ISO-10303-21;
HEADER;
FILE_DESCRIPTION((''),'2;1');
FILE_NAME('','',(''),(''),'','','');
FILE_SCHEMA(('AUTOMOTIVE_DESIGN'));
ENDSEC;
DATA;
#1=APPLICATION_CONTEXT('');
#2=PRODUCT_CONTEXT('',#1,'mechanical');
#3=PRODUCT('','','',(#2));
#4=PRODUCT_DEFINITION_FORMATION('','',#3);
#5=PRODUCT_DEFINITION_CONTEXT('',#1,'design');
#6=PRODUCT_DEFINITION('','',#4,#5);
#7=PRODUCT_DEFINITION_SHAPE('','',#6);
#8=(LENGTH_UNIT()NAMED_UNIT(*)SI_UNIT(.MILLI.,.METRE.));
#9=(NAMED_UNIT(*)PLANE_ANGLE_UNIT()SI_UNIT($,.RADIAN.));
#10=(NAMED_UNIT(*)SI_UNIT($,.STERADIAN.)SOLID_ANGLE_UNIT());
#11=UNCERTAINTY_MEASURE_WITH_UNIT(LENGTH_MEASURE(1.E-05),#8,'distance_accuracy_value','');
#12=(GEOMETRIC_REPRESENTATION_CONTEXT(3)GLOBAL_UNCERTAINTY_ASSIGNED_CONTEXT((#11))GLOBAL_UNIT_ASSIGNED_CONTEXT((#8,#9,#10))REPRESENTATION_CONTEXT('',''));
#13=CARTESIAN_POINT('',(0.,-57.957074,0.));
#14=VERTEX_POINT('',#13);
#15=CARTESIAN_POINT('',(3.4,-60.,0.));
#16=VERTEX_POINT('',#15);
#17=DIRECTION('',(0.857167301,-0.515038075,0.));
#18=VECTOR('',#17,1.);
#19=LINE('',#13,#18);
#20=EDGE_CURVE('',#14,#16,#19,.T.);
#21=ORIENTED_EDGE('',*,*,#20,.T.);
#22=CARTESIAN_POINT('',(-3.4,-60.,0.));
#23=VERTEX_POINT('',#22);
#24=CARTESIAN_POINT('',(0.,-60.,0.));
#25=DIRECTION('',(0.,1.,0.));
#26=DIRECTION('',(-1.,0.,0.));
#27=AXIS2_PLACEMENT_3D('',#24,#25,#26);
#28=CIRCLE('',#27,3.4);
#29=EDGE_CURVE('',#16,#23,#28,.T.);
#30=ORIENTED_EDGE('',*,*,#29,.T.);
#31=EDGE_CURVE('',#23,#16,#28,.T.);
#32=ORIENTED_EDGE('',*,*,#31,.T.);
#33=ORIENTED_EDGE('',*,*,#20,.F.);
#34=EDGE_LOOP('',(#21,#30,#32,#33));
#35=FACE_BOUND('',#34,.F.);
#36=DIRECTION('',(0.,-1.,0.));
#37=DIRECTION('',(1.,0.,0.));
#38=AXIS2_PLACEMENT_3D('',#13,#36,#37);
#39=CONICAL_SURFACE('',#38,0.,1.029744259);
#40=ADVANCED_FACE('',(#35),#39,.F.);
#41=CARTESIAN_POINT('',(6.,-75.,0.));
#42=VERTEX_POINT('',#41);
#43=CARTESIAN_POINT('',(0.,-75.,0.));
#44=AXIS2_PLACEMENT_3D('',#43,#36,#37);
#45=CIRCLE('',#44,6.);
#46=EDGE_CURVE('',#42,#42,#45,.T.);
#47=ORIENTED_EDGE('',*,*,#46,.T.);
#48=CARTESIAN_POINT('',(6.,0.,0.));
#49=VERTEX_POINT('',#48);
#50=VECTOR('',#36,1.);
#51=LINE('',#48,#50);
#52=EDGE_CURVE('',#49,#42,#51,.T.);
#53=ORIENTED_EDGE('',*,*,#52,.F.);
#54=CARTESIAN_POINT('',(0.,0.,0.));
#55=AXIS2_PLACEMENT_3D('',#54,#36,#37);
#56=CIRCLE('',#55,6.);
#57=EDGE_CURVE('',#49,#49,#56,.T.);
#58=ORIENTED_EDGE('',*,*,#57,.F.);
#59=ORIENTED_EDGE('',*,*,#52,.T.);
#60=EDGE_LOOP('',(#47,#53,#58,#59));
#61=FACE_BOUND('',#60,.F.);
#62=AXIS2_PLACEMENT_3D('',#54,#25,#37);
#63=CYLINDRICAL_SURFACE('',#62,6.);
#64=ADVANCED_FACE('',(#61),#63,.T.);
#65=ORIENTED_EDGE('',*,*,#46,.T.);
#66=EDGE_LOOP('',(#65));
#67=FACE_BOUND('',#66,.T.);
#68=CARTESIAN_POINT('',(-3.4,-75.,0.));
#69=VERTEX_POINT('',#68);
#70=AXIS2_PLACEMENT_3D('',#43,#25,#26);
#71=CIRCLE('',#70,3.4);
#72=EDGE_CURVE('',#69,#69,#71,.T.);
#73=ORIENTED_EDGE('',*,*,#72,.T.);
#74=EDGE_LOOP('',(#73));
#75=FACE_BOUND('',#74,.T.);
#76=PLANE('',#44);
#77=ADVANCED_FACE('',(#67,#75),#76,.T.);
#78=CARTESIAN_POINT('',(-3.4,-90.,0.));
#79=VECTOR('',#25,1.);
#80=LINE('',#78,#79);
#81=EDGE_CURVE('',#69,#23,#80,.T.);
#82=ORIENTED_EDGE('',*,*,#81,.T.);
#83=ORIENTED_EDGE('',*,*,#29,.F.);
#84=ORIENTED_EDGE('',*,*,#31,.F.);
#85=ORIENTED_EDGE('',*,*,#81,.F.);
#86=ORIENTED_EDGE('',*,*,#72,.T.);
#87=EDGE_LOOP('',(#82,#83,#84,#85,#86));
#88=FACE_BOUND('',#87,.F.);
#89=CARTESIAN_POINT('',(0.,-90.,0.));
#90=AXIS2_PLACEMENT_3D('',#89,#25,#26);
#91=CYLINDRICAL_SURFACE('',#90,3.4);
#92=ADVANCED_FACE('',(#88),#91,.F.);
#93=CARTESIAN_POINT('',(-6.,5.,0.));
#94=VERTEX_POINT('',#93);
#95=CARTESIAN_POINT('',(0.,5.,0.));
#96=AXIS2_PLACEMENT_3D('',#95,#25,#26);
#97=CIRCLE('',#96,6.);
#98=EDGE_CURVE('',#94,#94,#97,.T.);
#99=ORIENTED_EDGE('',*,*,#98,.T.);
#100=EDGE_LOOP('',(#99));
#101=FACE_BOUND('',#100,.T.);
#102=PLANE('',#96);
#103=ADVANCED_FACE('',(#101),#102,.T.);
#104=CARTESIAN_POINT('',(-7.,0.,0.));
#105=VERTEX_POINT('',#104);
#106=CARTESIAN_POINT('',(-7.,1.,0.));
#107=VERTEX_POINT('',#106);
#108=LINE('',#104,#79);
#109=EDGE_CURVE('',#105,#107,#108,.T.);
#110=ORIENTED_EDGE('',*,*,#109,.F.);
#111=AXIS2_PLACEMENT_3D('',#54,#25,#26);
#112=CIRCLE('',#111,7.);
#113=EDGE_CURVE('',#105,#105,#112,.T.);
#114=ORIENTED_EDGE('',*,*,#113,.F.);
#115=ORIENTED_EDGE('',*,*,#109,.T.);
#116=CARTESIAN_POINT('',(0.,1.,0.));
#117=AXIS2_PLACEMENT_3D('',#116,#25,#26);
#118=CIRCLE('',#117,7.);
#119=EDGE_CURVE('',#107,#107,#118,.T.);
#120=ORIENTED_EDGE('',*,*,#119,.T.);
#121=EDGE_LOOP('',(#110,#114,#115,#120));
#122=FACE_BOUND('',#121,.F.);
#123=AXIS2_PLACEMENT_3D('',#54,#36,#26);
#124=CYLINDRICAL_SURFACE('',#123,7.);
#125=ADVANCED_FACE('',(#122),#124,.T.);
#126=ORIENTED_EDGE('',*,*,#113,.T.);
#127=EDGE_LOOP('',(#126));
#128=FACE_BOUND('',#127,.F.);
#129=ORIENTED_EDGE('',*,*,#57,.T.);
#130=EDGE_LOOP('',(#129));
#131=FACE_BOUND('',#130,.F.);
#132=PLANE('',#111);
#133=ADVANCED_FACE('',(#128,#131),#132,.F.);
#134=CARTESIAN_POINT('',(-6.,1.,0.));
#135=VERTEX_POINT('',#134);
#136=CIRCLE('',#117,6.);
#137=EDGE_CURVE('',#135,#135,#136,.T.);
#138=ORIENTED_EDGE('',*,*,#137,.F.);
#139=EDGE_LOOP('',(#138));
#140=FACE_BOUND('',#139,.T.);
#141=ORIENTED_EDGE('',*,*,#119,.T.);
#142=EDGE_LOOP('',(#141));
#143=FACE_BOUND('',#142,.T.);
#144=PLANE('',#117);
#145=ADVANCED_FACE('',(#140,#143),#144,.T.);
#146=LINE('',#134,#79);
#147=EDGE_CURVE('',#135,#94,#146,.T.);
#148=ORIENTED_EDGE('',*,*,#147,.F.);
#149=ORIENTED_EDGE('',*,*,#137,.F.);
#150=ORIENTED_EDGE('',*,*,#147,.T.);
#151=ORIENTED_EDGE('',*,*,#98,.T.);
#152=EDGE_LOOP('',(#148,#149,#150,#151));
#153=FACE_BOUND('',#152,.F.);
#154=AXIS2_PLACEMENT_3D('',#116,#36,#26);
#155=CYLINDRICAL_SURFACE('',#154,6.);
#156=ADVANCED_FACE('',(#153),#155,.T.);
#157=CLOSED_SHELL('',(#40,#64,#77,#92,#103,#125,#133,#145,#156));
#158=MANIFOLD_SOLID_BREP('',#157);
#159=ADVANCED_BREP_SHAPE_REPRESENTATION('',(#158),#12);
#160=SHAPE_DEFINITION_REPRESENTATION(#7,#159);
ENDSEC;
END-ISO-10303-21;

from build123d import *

# Parameters (mm, degrees)
F0_R     = 6
F1_DEPTH = 75
F2_R     = 7
F2_R_2   = 6
F3_DEPTH = 1
F4_R     = 6
F5_DEPTH = 4
F7_D     = 6.8
F7_DEPTH = 15
F7_TIP   = 2.0429261047


with BuildPart() as f1:
    # F0 (on Front) → F1 (new body)
    with BuildSketch(Plane.XZ):
        Circle(F0_R)
    extrude(amount=F1_DEPTH)

    # F2 (on face) → F3 (join)
    with BuildSketch(Plane(origin=(0, 0, 0), x_dir=(-1, 0, 0), z_dir=(0, 1, 0))):
        Circle(F2_R)
        Circle(F2_R_2, mode=Mode.SUBTRACT)
        Circle(F2_R_2)
    extrude(amount=F3_DEPTH)

    # F4 (on face) → F5 (join)
    with BuildSketch(Plane(origin=(0, 1, 0), x_dir=(-1, 0, 0), z_dir=(0, 1, 0))):
        Circle(F4_R)
    extrude(amount=F5_DEPTH)

    # F7
    with Locations(Plane.XZ.offset(75)):
        with Locations((0, 0)):
            Hole(F7_D / 2, depth=F7_DEPTH)
            with Locations((0, 0, -(F7_DEPTH + F7_TIP / 2))):  # 118° drill point
                Cone(0, F7_D / 2, F7_TIP, mode=Mode.SUBTRACT)


solid = f1.part
